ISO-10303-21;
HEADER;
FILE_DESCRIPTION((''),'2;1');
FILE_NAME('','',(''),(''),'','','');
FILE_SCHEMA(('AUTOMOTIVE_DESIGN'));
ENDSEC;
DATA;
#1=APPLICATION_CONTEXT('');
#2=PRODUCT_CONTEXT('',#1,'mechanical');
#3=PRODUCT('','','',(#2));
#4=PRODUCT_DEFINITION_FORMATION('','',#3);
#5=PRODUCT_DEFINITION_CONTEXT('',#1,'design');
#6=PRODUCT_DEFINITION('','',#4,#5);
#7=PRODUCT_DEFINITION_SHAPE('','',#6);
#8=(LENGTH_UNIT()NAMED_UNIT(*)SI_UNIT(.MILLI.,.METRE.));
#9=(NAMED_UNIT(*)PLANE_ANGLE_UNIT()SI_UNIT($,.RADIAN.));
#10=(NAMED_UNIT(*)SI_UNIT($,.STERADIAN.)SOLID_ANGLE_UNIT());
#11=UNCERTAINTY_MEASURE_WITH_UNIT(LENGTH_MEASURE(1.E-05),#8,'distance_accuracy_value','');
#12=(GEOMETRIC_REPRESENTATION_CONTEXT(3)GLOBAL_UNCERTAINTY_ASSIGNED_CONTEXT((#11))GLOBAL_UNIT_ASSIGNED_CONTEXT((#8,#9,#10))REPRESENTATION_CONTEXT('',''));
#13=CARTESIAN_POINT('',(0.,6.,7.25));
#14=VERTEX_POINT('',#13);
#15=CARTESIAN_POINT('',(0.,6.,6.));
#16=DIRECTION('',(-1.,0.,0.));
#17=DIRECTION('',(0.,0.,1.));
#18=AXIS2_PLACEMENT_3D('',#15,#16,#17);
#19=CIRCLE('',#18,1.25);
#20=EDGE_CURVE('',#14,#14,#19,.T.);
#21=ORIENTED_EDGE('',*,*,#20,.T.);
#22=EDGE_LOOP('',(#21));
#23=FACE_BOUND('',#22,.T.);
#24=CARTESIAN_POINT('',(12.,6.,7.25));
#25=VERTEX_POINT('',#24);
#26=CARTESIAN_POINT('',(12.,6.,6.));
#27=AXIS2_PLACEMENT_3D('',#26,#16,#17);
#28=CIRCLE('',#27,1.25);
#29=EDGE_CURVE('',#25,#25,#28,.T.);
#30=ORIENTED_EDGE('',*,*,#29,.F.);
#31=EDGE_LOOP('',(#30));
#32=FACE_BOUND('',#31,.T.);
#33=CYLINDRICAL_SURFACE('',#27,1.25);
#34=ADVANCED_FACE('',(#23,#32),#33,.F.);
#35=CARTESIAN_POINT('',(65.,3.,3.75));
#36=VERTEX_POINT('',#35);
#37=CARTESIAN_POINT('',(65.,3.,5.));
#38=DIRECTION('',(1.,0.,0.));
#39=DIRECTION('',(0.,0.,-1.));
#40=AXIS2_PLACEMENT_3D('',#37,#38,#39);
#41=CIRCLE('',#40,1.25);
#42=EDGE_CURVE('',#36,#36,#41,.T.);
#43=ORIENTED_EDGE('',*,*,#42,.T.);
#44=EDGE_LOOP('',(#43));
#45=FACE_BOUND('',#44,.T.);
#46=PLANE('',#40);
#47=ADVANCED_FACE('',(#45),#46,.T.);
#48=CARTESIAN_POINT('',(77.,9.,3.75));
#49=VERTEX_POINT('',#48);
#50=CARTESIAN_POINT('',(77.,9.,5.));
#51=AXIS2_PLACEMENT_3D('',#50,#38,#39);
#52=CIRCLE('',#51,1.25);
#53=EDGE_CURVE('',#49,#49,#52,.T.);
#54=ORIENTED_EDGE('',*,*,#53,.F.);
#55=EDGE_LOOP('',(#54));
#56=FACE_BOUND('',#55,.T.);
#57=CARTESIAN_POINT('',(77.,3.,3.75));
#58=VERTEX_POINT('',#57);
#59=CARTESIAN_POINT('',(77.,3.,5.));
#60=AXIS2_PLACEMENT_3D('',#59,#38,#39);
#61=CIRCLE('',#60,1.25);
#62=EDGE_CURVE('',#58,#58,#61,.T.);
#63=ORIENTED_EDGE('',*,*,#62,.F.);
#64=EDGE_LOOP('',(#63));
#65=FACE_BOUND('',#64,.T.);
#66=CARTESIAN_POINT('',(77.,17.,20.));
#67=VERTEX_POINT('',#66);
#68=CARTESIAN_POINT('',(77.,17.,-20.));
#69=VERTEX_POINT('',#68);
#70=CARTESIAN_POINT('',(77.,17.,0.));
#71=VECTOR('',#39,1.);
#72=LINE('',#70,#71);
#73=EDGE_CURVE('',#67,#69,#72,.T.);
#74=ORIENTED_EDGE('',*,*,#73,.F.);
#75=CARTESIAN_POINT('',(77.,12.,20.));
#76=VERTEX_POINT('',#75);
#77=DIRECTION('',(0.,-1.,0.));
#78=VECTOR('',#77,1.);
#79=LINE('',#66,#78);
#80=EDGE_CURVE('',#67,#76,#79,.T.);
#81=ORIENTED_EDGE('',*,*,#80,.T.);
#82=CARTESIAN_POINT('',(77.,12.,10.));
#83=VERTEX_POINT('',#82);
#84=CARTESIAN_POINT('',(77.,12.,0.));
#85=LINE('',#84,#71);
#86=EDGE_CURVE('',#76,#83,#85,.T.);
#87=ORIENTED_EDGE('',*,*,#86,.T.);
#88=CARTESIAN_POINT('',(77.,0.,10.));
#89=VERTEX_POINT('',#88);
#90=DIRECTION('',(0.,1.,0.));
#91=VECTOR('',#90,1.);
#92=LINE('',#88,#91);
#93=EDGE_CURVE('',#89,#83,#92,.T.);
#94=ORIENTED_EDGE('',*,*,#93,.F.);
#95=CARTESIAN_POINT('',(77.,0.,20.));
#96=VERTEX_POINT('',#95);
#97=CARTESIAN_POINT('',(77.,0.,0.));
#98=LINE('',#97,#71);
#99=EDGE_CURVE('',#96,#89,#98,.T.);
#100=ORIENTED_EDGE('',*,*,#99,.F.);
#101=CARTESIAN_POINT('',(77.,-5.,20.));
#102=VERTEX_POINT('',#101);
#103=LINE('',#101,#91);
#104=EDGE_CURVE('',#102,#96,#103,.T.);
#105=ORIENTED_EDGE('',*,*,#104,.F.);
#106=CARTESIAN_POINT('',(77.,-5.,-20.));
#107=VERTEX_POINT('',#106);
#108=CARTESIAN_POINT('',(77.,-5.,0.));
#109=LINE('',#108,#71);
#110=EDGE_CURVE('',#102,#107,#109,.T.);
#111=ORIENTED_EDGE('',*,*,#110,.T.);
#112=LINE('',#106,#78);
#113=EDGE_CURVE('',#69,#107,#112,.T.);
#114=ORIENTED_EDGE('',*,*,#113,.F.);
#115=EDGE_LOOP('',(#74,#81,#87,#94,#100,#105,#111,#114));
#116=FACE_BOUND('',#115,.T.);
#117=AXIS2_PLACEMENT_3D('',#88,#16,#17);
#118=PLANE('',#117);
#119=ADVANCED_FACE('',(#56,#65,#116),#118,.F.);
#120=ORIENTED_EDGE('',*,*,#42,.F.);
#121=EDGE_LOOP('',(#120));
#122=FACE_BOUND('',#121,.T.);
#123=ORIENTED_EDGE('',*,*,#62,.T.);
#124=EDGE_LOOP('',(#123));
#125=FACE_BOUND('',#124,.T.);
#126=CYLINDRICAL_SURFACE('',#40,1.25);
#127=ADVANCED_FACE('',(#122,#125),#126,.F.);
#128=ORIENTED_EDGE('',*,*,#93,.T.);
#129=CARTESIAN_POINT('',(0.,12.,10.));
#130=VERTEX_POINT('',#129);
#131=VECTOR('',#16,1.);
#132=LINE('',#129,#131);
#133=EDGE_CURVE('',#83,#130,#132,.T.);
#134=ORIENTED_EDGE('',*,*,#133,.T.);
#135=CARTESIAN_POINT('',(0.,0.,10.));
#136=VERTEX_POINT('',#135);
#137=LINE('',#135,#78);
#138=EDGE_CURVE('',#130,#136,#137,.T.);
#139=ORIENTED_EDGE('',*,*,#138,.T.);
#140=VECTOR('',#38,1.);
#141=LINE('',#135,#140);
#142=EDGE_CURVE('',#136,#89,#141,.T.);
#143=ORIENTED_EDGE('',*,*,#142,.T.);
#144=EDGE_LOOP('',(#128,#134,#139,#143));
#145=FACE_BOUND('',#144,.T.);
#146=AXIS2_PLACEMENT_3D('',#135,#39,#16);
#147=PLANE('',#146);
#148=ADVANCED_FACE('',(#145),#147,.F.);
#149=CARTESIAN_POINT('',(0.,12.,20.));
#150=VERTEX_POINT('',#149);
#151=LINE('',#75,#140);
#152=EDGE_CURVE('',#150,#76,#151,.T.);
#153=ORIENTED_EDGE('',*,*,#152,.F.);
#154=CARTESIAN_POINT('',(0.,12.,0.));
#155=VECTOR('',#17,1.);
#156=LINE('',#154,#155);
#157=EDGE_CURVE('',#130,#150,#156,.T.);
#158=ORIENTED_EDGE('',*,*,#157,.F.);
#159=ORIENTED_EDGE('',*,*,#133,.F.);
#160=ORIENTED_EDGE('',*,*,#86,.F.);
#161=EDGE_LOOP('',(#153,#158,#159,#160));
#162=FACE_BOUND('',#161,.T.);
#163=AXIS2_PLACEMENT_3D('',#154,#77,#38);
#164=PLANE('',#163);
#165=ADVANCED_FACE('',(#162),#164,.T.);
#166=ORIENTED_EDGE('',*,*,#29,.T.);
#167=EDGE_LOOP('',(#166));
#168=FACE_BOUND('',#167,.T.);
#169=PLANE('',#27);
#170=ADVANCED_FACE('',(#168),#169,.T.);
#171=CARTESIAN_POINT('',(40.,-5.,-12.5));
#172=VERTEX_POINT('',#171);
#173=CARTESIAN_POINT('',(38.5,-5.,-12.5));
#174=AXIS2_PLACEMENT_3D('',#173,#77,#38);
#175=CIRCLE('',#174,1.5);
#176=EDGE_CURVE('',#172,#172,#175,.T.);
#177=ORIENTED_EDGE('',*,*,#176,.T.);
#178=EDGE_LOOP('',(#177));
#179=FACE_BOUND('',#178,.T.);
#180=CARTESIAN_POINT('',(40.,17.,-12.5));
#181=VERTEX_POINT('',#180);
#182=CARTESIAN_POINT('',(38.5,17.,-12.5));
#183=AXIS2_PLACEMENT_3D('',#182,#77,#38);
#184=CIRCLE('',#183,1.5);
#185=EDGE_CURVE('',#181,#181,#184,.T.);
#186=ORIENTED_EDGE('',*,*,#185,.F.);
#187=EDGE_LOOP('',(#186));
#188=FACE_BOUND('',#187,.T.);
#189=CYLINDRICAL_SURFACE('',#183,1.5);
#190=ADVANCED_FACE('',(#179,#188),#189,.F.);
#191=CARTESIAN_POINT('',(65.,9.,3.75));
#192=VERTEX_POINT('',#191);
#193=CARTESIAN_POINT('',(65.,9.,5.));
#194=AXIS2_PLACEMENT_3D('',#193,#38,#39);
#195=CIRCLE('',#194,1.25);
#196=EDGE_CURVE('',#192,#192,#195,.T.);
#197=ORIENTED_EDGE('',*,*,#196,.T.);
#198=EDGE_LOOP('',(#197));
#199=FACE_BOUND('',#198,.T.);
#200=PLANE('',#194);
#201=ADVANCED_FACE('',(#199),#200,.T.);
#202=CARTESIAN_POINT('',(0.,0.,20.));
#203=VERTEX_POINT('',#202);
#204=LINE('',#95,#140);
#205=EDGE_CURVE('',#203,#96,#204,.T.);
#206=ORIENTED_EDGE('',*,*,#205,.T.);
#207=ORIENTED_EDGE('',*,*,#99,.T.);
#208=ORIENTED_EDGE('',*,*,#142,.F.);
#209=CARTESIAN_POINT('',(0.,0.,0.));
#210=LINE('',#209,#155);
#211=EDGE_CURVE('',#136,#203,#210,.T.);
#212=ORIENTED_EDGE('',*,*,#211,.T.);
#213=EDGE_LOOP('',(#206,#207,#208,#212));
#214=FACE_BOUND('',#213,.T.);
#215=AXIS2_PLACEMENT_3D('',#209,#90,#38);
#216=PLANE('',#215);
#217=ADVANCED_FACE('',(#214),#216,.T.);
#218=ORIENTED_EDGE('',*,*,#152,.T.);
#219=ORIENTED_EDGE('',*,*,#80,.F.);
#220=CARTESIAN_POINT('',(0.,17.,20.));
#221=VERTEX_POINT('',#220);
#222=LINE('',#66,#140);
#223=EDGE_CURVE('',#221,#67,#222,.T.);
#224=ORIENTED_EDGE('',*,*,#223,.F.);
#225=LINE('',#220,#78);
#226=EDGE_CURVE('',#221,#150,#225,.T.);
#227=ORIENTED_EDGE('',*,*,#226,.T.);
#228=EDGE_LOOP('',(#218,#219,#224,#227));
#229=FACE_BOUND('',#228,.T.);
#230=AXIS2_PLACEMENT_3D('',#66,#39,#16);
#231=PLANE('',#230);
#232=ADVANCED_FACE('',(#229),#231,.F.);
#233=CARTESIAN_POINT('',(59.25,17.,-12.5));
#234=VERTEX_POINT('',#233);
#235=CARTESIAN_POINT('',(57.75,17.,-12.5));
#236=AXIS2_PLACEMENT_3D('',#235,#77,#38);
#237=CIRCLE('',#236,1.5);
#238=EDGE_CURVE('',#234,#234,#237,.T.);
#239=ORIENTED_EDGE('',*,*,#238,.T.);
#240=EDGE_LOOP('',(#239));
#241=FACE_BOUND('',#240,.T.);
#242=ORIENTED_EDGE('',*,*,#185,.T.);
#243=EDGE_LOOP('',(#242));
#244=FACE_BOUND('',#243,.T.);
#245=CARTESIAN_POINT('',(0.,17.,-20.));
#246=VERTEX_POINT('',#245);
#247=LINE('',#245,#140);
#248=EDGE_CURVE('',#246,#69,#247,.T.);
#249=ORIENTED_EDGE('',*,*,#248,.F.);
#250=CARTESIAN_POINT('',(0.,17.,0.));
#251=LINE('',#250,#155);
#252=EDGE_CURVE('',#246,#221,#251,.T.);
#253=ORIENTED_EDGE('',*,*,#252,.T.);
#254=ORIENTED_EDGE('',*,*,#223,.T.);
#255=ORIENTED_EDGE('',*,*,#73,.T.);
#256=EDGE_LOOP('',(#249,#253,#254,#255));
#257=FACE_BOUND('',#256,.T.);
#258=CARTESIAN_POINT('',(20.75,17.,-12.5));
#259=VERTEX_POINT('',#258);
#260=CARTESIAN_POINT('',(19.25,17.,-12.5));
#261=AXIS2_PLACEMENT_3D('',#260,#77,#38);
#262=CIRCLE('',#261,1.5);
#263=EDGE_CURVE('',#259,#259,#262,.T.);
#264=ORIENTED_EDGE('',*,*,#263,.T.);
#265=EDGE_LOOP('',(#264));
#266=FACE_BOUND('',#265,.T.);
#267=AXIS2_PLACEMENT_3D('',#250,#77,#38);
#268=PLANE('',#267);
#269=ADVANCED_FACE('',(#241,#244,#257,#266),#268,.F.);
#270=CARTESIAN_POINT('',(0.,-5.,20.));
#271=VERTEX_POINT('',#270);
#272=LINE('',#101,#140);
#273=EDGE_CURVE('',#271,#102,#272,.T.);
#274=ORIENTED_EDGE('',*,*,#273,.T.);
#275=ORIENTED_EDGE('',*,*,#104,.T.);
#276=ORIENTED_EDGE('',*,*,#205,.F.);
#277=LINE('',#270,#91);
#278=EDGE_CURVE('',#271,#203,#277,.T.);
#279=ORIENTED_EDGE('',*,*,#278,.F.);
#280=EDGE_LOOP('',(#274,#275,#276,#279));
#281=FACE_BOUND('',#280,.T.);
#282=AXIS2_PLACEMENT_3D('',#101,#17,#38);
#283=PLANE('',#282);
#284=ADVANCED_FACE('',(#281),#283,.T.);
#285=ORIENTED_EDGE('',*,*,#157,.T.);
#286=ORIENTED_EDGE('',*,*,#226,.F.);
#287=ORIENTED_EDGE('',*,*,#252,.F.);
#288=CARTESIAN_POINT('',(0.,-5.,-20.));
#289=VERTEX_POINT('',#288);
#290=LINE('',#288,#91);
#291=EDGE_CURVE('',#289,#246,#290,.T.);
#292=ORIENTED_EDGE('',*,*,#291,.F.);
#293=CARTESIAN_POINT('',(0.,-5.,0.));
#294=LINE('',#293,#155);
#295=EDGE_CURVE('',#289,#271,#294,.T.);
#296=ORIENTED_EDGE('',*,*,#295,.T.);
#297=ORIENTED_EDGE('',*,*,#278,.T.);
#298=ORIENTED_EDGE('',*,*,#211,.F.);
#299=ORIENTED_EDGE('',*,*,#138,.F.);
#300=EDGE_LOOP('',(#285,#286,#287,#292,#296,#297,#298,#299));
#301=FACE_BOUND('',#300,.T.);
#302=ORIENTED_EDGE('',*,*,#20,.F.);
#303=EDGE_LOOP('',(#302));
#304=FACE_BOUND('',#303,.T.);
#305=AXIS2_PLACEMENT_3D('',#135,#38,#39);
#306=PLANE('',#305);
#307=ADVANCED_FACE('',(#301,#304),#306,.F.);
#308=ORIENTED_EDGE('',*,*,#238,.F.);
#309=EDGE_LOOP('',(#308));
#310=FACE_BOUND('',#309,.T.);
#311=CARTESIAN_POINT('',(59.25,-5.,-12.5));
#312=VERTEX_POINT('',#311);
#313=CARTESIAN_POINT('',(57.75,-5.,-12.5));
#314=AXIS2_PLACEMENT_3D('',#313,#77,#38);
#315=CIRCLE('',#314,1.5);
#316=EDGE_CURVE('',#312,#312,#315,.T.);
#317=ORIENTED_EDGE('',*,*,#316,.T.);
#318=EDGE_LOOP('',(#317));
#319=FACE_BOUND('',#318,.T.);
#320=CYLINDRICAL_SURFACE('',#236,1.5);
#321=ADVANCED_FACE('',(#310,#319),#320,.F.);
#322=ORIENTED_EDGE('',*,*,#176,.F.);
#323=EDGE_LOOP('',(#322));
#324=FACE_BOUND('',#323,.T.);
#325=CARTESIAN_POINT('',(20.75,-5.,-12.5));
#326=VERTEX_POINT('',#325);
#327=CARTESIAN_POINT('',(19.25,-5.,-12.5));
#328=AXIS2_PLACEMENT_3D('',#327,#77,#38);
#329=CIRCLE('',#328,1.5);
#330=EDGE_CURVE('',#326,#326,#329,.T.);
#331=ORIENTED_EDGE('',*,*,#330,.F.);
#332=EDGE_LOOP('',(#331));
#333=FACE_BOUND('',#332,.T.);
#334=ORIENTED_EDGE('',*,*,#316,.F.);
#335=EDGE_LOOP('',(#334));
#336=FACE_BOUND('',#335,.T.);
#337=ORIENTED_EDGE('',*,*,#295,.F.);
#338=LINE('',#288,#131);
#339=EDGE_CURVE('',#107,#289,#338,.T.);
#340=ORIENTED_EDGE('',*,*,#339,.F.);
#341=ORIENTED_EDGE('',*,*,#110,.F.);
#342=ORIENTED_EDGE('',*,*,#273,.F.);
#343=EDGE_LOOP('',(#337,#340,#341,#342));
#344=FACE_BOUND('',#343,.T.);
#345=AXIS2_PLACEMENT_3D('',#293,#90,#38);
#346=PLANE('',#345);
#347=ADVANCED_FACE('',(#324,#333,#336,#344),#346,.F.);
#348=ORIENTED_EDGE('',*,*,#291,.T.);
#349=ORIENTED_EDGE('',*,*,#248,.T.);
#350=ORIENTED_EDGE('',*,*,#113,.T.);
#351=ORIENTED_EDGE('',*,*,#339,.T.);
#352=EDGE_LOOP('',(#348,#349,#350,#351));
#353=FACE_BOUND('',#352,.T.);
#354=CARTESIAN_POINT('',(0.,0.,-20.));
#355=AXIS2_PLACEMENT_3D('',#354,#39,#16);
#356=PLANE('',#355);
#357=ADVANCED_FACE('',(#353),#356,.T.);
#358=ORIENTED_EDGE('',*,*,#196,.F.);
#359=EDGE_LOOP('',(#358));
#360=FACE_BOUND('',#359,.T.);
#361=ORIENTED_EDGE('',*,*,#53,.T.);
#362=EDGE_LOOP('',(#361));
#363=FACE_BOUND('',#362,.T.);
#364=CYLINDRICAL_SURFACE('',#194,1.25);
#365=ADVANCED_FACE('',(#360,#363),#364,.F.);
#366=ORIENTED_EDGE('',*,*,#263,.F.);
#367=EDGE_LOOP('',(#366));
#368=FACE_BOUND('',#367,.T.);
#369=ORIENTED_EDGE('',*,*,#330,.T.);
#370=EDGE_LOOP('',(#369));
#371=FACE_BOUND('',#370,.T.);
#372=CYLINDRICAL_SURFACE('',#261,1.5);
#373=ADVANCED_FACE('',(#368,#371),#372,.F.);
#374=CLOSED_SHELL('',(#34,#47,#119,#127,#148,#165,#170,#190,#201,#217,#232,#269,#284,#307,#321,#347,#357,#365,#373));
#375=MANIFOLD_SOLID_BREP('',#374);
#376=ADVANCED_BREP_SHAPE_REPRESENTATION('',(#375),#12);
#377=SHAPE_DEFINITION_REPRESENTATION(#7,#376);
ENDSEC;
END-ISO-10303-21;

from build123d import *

# Parameters (mm, degrees)
SKETCH1_W               = 77
SKETCH1_H               = 12
BOSS_EXTRUDE1_DEPTH     = 10
SKETCH2_R               = 1.25
CUT_EXTRUDE1_DEPTH      = 12
BOSS_EXTRUDE2_OUTLINE_W = 77
BOSS_EXTRUDE2_OUTLINE_H = 20
BOSS_EXTRUDE2_DEPTH     = 5
SKETCH4_W               = 77
SKETCH4_H               = 22
BOSS_EXTRUDE3_DEPTH     = 5
SKETCH5_R               = 1.25
CUT_EXTRUDE2_DEPTH      = 12
SKETCH7_W               = 77
SKETCH7_H               = 22
BOSS_EXTRUDE4_DEPTH     = 15
SKETCH8_R               = 1.5
CUT_EXTRUDE3_DEPTH      = 83.540898953


# Read off the part's stored shape, not the designer's step: Boss-Extrude2
with BuildPart() as part:
    # Sketch1 → Boss-Extrude1 (new body)
    with BuildSketch(Plane.XY):
        with Locations((38.5, 6)):
            Rectangle(SKETCH1_W, SKETCH1_H)
    extrude(amount=BOSS_EXTRUDE1_DEPTH)

    # Sketch2 → Cut-Extrude1 (cut)
    with BuildSketch(Plane(origin=(77, 0, 0), x_dir=(0, 0, -1), z_dir=(1, 0, 0))):
        with Locations((-5, 3)):
            Circle(SKETCH2_R)
        with Locations((-5, 9)):
            Circle(SKETCH2_R)
    extrude(amount=-CUT_EXTRUDE1_DEPTH, mode=Mode.SUBTRACT)

    # Boss-Extrude2 outline → Boss-Extrude2 (add)
    with BuildSketch(Plane(origin=(0, 12, 0), x_dir=(1, 0, 0), z_dir=(0, 1, 0))):
        with Locations((38.5, -10)):
            Rectangle(BOSS_EXTRUDE2_OUTLINE_W, BOSS_EXTRUDE2_OUTLINE_H)
    boss_extrude2 = extrude(amount=BOSS_EXTRUDE2_DEPTH)

    # Mirror2: Boss-Extrude2 across plane
    add(boss_extrude2.mirror(Plane(origin=(0, 6, 0), x_dir=(0, 0, 1), z_dir=(0, -1, 0))))

    # Sketch4 → Boss-Extrude3 (add)
    with BuildSketch(Plane(origin=(0, 0, 0), x_dir=(-1, 0, 0), z_dir=(0, 0, -1))):
        with Locations((-38.5, 6)):
            Rectangle(SKETCH4_W, SKETCH4_H)
    extrude(amount=BOSS_EXTRUDE3_DEPTH)

    # Sketch5 → Cut-Extrude2 (cut)
    with BuildSketch(Plane.ZY):
        with Locations((6, 6)):
            Circle(SKETCH5_R)
    extrude(amount=-CUT_EXTRUDE2_DEPTH, mode=Mode.SUBTRACT)

    # Sketch7 → Boss-Extrude4 (add)
    with BuildSketch(Plane(origin=(0, 0, -5), x_dir=(-1, 0, 0), z_dir=(0, 0, -1))):
        with Locations((-38.5, 6)):
            Rectangle(SKETCH7_W, SKETCH7_H)
    extrude(amount=BOSS_EXTRUDE4_DEPTH)

    # Sketch8 → Cut-Extrude3 (cut, through all)
    with BuildSketch(Plane.XZ.offset(5)):
        with Locations((19.25, -12.5)):
            Circle(SKETCH8_R)
        with Locations((38.5, -12.5)):
            Circle(SKETCH8_R)
        with Locations((57.75, -12.5)):
            Circle(SKETCH8_R)
    extrude(amount=-CUT_EXTRUDE3_DEPTH, mode=Mode.SUBTRACT)


solid = part.part
